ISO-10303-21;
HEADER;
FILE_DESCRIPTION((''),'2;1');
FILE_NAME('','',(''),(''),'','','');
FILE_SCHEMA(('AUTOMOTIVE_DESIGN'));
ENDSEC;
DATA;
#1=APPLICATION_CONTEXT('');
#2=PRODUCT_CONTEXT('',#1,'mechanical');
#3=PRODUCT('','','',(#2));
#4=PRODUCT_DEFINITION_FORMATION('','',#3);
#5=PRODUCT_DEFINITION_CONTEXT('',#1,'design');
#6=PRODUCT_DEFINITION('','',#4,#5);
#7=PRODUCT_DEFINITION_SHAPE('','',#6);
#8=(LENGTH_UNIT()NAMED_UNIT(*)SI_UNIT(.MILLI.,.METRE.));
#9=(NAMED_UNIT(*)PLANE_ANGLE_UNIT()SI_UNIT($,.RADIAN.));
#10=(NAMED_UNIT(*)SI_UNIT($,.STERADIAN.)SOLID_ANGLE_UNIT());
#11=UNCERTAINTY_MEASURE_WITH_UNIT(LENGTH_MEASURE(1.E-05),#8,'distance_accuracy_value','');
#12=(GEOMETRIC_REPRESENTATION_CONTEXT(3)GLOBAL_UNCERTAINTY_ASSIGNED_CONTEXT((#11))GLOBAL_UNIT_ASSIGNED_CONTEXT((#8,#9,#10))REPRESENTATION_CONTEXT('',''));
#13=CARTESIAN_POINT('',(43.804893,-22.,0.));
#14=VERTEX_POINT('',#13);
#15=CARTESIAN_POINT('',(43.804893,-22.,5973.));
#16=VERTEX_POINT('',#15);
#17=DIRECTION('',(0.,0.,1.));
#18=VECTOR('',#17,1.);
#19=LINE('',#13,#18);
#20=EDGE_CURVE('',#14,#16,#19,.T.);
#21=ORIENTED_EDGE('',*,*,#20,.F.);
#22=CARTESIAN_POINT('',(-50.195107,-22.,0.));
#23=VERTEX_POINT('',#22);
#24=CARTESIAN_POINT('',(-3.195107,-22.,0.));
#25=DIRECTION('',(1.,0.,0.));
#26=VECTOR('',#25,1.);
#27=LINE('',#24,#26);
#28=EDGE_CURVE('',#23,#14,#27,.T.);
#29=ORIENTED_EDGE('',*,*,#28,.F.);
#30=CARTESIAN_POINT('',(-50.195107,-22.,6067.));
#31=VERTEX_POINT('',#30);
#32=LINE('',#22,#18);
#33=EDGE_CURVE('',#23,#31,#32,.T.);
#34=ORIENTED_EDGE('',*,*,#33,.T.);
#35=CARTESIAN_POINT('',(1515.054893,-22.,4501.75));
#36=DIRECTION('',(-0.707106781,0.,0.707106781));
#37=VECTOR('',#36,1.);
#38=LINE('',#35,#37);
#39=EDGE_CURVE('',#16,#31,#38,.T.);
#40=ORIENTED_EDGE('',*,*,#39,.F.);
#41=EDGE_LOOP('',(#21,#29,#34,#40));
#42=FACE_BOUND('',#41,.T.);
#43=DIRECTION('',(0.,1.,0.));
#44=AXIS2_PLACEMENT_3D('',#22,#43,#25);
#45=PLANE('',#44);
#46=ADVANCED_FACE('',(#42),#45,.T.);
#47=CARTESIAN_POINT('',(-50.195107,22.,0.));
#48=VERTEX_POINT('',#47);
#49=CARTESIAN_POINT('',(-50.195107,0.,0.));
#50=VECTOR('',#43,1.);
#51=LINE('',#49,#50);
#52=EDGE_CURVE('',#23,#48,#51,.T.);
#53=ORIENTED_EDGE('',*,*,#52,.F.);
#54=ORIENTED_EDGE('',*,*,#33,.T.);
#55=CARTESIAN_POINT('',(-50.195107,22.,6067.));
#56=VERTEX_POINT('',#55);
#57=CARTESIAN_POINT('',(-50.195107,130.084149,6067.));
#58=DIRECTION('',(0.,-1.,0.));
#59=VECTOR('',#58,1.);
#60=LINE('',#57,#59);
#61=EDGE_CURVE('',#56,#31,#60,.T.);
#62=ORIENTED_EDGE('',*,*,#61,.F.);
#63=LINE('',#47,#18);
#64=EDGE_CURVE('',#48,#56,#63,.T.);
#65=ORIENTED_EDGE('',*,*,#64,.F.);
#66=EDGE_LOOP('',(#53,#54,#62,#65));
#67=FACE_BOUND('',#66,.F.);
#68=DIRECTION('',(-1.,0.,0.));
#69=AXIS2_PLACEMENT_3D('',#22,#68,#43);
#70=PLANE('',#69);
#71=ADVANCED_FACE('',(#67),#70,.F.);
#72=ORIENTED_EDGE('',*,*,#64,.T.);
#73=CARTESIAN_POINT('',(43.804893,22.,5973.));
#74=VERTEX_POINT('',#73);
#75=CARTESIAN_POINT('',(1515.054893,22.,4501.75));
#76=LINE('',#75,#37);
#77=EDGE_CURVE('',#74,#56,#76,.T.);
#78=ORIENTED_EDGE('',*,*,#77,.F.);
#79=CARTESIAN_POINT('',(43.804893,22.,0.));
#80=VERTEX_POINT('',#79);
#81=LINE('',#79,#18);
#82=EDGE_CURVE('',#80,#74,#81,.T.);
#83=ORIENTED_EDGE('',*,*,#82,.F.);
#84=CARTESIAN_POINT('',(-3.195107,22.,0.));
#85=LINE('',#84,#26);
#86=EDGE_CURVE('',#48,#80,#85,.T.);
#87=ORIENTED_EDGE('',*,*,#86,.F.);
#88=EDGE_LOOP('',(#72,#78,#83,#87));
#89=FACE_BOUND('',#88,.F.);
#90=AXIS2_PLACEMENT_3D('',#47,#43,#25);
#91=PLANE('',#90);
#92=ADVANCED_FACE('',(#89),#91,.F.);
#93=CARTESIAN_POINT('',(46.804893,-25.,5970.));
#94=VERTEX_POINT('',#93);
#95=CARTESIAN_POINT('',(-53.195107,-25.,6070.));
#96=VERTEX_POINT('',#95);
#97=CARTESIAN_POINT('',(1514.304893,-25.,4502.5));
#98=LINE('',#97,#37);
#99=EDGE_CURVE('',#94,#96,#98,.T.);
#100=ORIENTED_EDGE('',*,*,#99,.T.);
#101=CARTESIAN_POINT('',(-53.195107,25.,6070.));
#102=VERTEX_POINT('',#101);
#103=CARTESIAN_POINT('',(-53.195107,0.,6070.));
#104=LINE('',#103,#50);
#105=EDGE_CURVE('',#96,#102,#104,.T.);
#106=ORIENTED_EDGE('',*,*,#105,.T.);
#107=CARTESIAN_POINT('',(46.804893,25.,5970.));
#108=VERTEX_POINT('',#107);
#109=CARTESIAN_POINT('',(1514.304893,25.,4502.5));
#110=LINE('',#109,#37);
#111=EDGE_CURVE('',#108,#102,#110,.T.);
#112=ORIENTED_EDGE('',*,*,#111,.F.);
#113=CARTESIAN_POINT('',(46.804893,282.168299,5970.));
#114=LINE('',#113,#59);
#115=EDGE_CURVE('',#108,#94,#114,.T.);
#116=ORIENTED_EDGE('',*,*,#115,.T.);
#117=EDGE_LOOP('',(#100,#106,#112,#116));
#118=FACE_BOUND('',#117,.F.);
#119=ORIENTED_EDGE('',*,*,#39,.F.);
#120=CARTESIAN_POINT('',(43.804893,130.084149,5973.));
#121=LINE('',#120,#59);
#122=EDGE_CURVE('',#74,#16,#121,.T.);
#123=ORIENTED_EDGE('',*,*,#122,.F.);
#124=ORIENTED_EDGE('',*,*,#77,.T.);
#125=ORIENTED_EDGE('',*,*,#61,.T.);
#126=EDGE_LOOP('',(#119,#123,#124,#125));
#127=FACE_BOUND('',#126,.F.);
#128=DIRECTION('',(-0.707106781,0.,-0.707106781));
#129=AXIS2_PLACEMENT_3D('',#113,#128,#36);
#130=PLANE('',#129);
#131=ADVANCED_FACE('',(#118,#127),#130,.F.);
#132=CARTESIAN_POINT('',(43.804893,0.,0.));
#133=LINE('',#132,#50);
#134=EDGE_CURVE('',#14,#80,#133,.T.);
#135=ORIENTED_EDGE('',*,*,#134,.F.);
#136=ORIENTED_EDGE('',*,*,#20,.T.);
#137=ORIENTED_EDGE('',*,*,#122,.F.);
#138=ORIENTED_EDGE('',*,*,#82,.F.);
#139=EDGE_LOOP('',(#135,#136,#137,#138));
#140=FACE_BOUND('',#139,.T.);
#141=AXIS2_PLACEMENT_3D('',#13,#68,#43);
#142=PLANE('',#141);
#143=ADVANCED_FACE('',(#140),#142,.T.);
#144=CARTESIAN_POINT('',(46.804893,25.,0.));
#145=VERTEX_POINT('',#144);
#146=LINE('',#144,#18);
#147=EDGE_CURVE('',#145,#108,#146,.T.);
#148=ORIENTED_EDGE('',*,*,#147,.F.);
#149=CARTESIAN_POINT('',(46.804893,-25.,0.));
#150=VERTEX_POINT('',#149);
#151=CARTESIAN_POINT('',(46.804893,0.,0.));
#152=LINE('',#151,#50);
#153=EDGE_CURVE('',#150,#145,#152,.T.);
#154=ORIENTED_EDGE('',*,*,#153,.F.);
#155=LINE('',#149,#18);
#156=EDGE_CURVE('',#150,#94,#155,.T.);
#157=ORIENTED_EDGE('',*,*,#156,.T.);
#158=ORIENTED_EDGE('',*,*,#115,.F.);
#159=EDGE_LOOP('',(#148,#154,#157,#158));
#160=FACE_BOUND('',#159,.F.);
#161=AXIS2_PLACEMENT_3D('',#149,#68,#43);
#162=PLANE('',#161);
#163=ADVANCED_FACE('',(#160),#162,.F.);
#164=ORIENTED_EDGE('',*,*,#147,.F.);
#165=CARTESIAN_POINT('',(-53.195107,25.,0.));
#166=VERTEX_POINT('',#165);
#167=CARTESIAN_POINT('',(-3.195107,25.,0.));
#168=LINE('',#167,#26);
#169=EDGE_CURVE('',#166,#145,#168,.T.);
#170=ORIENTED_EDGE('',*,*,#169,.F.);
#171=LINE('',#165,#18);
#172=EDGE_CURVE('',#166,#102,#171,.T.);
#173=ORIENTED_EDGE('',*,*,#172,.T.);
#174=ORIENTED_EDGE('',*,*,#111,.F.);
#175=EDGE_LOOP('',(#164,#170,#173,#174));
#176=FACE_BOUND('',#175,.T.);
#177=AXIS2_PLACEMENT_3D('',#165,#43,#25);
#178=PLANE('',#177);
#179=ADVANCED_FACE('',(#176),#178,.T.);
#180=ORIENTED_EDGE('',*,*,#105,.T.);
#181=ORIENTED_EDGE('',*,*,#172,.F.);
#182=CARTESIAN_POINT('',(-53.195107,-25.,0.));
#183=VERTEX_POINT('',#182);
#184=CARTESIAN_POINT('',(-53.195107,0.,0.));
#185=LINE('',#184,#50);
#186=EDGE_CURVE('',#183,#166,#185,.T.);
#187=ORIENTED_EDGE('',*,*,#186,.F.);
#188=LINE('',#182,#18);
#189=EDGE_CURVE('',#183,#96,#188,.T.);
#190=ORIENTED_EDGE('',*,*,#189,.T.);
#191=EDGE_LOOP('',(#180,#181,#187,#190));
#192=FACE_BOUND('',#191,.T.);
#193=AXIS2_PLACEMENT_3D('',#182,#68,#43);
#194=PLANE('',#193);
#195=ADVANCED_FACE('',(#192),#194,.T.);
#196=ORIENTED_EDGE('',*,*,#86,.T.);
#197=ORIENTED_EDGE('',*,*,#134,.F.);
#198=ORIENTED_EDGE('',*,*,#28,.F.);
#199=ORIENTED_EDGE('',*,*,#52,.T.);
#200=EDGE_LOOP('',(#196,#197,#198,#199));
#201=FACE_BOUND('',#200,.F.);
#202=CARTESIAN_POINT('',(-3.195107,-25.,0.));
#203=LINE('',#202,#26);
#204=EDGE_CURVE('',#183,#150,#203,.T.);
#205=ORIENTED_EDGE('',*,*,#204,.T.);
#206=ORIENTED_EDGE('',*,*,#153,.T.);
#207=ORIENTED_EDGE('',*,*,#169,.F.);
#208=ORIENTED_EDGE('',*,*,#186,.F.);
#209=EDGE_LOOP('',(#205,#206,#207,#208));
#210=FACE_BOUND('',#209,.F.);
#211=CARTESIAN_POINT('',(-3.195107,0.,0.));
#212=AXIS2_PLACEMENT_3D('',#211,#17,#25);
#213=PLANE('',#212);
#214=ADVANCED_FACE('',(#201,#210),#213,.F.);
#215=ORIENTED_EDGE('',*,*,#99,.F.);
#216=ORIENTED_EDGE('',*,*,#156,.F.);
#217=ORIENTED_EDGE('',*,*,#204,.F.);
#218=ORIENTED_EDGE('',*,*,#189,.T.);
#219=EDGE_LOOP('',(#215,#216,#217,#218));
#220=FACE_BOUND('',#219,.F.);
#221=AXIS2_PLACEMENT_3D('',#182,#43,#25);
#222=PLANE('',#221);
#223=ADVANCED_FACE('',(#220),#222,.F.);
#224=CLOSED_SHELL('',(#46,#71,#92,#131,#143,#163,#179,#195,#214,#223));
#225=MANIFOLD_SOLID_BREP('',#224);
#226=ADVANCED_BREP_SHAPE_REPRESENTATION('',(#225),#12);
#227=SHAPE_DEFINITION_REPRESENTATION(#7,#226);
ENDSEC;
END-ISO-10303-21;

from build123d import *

# Parameters (mm, degrees)
F0_W        = 100
F0_H        = 50
F0_W_2      = 94
F0_H_2      = 44
F1_DEPTH    = 6070
F2_T1_DEPTH = 564.3365975932


# Not quite as in the source:
# - a fillet or chamfer that OpenCascade refuses, or shapes differently, is made with other operations: its cross-section is extruded or revolved along the edge and cut away or added


with BuildPart() as f1:
    # F0 (on Top) → F1 (new body)
    with BuildSketch(Plane.XY):
        with Locations((-3.195107216, 0)):
            Rectangle(F0_W, F0_H)
        with Locations((-3.195107216, 0)):
            Rectangle(F0_W_2, F0_H_2, mode=Mode.SUBTRACT)
    extrude(amount=F1_DEPTH)

    # F2: chamfer of 100 on 1 edges, made by hand

    # F2_s2 → F2_t1 (cut)
    with BuildSketch(Plane.XZ.offset(-282.1682987966)):
        Polygon((46.804892784, 5970), (-53.195107216, 6070), (46.804892784, 6070), align=None)
    extrude(amount=F2_T1_DEPTH, mode=Mode.SUBTRACT)


solid = f1.part
